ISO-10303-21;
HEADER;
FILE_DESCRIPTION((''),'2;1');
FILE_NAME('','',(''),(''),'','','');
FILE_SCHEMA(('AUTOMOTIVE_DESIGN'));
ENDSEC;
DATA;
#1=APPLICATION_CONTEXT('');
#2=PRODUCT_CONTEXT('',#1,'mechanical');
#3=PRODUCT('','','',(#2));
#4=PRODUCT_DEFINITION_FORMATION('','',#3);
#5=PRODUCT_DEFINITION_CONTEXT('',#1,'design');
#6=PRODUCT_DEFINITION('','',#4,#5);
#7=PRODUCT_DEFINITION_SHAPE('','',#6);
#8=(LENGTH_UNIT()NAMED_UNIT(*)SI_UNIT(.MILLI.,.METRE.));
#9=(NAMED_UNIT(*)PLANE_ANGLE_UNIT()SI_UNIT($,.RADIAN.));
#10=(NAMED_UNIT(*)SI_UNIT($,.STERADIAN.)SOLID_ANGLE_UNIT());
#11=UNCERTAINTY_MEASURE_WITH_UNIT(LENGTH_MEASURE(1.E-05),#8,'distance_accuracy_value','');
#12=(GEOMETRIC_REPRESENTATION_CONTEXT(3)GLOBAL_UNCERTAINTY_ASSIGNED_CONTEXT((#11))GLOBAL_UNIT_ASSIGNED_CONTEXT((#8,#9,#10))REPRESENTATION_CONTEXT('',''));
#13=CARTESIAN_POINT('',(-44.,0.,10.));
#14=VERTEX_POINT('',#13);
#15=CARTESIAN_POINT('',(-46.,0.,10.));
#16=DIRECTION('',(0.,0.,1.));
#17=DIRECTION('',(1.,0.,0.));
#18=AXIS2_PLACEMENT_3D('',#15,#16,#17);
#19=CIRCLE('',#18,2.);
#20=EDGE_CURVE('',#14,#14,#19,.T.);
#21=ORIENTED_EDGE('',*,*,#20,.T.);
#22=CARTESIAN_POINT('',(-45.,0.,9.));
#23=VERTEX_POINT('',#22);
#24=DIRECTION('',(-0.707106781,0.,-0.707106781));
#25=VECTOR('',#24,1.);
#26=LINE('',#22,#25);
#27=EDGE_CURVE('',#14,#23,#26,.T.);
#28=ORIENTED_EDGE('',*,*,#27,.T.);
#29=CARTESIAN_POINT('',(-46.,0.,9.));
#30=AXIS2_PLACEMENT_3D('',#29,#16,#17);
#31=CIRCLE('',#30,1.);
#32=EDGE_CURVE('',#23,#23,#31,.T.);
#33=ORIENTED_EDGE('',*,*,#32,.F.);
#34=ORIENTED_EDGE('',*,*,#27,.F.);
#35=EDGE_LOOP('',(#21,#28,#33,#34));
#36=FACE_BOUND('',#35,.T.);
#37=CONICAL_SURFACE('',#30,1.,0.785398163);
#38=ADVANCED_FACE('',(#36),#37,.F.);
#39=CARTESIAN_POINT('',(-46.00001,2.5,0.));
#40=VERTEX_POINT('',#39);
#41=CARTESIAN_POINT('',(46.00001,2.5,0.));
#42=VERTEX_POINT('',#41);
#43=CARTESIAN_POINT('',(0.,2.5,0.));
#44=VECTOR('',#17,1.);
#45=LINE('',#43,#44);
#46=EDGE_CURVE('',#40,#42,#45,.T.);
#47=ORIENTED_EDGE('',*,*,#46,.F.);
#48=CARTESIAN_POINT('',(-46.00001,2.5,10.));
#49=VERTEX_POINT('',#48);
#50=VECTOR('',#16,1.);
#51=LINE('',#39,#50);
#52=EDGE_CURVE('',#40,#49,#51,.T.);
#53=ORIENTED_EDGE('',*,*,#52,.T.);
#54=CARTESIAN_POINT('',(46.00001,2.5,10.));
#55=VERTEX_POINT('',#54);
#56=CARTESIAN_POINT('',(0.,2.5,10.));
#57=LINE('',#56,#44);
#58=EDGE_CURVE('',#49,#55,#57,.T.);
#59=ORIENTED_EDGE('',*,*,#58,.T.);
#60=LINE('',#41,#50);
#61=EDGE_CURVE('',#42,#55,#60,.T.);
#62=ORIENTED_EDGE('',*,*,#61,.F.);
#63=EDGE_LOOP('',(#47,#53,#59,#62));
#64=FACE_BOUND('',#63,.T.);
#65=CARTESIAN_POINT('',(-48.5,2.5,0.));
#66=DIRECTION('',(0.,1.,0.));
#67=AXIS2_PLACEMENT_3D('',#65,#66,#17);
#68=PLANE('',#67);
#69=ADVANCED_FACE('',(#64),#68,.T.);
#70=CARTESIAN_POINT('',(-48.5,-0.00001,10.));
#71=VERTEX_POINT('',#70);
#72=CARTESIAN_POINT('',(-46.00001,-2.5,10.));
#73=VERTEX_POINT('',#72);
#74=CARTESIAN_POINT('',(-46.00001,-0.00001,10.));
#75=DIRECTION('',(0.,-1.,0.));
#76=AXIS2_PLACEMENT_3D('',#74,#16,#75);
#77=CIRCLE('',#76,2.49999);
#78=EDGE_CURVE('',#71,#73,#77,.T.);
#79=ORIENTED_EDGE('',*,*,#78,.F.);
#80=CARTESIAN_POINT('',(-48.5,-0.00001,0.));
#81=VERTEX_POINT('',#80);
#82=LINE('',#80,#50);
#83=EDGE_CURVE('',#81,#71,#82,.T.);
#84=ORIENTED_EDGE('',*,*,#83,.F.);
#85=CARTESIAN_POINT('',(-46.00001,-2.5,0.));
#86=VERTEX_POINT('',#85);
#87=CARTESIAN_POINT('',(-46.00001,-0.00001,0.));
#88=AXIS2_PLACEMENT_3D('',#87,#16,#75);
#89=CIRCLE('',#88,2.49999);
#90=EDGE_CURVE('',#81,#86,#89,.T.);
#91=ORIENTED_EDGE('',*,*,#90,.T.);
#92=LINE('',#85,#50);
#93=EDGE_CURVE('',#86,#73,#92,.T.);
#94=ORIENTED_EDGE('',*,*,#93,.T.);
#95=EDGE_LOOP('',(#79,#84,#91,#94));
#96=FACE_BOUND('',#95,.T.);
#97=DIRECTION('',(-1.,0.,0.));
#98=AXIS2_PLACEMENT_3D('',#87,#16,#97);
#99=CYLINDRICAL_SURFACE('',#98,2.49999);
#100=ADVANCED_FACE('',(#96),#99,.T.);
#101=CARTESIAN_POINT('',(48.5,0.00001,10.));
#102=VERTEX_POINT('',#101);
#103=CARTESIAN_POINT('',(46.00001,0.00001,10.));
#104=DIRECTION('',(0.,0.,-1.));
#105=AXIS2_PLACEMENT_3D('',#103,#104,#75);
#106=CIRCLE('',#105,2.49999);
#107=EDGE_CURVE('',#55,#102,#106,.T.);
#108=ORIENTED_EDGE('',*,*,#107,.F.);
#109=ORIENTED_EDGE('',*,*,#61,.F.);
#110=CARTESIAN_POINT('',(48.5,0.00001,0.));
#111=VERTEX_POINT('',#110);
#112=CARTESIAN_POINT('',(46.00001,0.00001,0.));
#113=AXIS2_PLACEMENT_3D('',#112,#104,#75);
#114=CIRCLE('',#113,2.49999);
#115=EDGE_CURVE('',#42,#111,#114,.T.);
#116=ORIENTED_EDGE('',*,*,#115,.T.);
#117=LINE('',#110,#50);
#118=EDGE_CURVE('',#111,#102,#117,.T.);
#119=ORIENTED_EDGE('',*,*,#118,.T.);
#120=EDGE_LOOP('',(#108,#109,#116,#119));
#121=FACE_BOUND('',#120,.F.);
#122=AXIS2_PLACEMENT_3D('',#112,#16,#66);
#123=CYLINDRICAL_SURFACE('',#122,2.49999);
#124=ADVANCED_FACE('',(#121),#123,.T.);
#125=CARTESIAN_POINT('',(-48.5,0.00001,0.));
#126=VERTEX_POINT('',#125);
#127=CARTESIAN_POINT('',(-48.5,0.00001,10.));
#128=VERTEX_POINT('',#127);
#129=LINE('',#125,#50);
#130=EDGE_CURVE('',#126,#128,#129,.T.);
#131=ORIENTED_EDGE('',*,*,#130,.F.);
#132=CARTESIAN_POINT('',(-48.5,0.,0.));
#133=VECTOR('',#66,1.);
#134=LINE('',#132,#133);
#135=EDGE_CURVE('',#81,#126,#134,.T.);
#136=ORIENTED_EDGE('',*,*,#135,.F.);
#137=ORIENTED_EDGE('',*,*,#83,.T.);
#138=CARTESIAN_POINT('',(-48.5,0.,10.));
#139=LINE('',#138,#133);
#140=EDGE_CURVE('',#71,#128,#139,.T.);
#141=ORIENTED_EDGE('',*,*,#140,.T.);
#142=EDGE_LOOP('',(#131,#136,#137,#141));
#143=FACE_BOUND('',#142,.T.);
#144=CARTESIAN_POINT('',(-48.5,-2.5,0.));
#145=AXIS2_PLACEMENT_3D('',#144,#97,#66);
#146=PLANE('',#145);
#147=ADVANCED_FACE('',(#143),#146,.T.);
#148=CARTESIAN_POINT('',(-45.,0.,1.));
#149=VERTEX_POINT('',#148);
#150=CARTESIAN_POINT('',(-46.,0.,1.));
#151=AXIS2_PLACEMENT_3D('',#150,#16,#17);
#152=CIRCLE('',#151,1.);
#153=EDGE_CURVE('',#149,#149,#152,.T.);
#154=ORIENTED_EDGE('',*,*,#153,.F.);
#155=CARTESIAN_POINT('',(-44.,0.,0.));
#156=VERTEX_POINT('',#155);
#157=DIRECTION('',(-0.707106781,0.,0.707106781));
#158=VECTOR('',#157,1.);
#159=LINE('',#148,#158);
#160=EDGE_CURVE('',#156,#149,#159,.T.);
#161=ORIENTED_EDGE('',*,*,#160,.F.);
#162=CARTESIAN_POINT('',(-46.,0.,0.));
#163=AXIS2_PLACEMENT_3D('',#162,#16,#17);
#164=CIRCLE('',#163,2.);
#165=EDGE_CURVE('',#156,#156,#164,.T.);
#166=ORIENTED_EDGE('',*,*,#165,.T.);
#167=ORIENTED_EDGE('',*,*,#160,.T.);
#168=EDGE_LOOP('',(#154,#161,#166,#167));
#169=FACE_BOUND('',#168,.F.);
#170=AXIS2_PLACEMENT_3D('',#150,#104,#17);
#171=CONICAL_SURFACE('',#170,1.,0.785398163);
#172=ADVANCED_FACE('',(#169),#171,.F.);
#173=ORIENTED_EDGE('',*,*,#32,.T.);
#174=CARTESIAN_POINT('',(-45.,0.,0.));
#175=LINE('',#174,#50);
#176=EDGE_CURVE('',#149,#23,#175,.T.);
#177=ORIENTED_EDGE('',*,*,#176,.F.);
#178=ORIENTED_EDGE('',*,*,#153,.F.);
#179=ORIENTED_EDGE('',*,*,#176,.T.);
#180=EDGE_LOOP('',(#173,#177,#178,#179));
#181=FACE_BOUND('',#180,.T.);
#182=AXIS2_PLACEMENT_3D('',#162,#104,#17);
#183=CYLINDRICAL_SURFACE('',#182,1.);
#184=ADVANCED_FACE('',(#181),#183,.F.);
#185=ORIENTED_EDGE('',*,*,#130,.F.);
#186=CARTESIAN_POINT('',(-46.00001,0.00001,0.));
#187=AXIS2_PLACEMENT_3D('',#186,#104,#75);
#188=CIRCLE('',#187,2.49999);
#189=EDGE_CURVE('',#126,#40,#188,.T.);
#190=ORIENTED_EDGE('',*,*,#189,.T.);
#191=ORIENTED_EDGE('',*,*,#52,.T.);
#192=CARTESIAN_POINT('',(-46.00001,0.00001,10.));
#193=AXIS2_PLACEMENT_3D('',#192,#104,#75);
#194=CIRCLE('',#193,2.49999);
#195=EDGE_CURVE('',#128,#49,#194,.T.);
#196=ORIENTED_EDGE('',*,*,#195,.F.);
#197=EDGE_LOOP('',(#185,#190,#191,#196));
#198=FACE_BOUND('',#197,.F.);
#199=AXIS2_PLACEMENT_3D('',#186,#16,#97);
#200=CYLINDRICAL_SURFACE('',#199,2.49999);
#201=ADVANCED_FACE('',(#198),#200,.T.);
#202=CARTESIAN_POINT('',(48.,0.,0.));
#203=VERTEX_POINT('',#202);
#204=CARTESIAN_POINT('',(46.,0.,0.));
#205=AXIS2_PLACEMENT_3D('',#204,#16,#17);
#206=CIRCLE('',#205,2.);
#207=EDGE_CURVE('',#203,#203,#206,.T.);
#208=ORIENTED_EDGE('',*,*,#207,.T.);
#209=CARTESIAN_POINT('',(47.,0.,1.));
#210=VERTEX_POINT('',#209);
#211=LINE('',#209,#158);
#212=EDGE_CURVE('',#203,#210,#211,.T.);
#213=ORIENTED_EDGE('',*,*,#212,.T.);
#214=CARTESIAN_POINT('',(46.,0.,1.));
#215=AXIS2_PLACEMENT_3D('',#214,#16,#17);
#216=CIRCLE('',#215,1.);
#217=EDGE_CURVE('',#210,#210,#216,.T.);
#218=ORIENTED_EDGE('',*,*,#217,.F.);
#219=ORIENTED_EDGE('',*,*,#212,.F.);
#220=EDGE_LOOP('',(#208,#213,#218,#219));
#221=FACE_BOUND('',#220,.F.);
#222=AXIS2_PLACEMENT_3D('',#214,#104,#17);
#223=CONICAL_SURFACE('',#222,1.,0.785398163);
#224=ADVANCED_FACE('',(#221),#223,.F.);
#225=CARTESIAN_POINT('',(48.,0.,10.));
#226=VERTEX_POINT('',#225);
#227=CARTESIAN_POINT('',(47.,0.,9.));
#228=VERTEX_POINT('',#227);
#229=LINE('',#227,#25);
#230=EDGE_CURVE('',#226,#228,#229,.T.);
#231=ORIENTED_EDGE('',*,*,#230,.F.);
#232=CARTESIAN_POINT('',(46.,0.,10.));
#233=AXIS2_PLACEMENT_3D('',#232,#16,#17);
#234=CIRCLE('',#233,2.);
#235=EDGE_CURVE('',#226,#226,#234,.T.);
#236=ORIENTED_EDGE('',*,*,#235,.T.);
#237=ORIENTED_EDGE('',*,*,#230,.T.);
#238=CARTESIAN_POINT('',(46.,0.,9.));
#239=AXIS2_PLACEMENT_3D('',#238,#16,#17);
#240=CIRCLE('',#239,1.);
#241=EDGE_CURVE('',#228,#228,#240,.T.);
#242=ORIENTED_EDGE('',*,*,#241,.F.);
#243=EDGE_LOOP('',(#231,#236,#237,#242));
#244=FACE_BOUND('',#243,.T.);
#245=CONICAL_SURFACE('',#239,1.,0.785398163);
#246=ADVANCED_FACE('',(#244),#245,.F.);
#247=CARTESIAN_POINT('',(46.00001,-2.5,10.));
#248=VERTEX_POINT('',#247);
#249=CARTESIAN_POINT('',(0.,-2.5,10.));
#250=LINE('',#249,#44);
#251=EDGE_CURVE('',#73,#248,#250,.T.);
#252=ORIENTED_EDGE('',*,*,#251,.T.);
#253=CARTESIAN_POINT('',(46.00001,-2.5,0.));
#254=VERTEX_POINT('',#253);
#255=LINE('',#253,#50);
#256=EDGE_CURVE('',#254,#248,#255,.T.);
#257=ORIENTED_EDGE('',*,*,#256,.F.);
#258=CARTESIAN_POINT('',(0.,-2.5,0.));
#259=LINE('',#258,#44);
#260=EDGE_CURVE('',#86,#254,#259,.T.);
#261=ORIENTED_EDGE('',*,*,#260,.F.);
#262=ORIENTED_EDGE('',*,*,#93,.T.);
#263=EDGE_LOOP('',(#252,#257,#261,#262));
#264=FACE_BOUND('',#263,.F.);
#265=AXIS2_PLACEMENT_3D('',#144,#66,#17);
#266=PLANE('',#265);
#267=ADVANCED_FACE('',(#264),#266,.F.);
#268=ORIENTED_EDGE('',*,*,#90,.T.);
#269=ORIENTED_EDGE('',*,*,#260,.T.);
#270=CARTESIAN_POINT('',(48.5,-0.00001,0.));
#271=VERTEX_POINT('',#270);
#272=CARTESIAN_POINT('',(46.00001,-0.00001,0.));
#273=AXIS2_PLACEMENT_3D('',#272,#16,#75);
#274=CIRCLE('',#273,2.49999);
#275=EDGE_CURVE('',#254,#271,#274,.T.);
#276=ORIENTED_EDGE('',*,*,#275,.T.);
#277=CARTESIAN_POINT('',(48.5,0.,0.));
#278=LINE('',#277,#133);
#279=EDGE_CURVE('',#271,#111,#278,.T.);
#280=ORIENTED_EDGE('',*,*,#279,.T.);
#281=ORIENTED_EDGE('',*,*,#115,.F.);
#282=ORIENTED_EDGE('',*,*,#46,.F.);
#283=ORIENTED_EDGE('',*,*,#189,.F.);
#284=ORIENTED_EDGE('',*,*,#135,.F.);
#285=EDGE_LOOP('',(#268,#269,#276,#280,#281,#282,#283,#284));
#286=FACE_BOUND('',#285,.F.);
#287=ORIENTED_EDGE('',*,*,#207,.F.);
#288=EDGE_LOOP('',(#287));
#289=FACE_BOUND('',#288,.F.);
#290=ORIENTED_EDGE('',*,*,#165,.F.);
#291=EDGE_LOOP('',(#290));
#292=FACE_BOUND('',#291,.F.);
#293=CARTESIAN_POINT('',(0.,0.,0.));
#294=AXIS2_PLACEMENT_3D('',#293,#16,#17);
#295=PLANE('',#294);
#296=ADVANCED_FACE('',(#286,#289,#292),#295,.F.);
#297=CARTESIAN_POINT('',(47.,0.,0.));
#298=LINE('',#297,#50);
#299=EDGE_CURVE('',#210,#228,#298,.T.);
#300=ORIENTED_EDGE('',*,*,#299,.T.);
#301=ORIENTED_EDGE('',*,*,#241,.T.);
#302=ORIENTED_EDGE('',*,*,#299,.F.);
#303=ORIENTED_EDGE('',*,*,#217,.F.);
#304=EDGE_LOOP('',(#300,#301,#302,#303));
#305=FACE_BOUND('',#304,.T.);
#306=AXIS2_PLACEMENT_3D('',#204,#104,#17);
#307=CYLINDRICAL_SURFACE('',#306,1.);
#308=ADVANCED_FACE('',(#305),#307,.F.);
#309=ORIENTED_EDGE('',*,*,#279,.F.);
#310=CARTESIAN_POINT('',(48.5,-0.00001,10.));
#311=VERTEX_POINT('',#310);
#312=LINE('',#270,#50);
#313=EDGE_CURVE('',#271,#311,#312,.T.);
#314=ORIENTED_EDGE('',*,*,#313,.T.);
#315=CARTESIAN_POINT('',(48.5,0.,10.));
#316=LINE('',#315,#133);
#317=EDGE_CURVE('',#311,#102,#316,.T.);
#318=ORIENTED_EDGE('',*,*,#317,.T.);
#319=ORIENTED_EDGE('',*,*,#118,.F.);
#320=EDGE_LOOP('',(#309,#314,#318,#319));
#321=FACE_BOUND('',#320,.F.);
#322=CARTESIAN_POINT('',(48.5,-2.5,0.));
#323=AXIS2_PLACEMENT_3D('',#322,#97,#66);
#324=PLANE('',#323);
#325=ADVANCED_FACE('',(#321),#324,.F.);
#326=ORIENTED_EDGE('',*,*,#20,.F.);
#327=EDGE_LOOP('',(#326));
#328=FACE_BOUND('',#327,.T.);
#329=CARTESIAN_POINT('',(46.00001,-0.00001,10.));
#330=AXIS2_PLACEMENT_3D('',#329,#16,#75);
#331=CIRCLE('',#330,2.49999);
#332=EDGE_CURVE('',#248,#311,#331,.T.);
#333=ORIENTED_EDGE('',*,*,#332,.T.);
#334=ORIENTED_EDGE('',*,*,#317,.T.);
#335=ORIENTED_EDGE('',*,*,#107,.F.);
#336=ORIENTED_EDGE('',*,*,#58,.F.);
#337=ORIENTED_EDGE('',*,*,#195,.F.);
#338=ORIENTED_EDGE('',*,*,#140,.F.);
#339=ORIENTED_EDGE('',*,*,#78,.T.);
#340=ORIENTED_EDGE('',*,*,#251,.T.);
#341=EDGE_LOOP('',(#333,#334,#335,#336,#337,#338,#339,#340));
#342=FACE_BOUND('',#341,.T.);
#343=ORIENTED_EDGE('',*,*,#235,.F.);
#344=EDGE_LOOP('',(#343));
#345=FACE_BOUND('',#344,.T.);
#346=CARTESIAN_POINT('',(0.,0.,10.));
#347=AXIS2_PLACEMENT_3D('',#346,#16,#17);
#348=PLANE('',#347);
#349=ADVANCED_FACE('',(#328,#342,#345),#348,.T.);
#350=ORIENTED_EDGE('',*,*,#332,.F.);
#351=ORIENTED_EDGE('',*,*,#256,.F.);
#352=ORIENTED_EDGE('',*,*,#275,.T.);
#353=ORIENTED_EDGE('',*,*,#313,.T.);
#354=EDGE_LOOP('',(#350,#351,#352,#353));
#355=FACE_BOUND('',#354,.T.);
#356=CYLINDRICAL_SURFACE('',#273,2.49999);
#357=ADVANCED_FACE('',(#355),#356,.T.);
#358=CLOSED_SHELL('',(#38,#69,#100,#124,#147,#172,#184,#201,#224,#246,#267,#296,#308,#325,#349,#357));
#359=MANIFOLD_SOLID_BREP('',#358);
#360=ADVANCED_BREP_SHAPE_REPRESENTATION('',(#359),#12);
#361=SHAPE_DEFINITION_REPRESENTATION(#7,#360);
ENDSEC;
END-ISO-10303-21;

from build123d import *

# Parameters (mm, degrees)
F0_W     = 97
F0_H     = 5
F0_R     = 1
F1_DEPTH = 10
F2_R     = 2.49999
F3_SIZE  = 1


# Not quite as in the source:
# - a fillet or chamfer is up to 0.001 mm smaller than in the source, because OpenCascade refuses the exact size


with BuildPart() as f1:
    # F0 (on Top) → F1 (new body)
    with BuildSketch(Plane.XY):
        Rectangle(F0_W, F0_H)
        with Locations((-46, 0)):
            Circle(F0_R, mode=Mode.SUBTRACT)
        with Locations((46, 0)):
            Circle(F0_R, mode=Mode.SUBTRACT)
    extrude(amount=F1_DEPTH)

    # F2 (radius 2.5 in the source; OpenCascade refuses exactly that, so slightly less here)
    f2_edges = [f1.edges().sort_by_distance(p)[0] for p in [
        (48.5, 2.5, 5),
        (48.5, -2.5, 5),
        (-48.5, 2.5, 5),
        (-48.5, -2.5, 5),
    ]]
    fillet(f2_edges, radius=F2_R)

    # F3
    f3_edges = [f1.edges().sort_by_distance(p)[0] for p in [
        (-47, 0, 10),
        (45, 0, 10),
        (45, 0, 0),
        (-47, 0, 0),
    ]]
    chamfer(f3_edges, length=F3_SIZE)


solid = f1.part
